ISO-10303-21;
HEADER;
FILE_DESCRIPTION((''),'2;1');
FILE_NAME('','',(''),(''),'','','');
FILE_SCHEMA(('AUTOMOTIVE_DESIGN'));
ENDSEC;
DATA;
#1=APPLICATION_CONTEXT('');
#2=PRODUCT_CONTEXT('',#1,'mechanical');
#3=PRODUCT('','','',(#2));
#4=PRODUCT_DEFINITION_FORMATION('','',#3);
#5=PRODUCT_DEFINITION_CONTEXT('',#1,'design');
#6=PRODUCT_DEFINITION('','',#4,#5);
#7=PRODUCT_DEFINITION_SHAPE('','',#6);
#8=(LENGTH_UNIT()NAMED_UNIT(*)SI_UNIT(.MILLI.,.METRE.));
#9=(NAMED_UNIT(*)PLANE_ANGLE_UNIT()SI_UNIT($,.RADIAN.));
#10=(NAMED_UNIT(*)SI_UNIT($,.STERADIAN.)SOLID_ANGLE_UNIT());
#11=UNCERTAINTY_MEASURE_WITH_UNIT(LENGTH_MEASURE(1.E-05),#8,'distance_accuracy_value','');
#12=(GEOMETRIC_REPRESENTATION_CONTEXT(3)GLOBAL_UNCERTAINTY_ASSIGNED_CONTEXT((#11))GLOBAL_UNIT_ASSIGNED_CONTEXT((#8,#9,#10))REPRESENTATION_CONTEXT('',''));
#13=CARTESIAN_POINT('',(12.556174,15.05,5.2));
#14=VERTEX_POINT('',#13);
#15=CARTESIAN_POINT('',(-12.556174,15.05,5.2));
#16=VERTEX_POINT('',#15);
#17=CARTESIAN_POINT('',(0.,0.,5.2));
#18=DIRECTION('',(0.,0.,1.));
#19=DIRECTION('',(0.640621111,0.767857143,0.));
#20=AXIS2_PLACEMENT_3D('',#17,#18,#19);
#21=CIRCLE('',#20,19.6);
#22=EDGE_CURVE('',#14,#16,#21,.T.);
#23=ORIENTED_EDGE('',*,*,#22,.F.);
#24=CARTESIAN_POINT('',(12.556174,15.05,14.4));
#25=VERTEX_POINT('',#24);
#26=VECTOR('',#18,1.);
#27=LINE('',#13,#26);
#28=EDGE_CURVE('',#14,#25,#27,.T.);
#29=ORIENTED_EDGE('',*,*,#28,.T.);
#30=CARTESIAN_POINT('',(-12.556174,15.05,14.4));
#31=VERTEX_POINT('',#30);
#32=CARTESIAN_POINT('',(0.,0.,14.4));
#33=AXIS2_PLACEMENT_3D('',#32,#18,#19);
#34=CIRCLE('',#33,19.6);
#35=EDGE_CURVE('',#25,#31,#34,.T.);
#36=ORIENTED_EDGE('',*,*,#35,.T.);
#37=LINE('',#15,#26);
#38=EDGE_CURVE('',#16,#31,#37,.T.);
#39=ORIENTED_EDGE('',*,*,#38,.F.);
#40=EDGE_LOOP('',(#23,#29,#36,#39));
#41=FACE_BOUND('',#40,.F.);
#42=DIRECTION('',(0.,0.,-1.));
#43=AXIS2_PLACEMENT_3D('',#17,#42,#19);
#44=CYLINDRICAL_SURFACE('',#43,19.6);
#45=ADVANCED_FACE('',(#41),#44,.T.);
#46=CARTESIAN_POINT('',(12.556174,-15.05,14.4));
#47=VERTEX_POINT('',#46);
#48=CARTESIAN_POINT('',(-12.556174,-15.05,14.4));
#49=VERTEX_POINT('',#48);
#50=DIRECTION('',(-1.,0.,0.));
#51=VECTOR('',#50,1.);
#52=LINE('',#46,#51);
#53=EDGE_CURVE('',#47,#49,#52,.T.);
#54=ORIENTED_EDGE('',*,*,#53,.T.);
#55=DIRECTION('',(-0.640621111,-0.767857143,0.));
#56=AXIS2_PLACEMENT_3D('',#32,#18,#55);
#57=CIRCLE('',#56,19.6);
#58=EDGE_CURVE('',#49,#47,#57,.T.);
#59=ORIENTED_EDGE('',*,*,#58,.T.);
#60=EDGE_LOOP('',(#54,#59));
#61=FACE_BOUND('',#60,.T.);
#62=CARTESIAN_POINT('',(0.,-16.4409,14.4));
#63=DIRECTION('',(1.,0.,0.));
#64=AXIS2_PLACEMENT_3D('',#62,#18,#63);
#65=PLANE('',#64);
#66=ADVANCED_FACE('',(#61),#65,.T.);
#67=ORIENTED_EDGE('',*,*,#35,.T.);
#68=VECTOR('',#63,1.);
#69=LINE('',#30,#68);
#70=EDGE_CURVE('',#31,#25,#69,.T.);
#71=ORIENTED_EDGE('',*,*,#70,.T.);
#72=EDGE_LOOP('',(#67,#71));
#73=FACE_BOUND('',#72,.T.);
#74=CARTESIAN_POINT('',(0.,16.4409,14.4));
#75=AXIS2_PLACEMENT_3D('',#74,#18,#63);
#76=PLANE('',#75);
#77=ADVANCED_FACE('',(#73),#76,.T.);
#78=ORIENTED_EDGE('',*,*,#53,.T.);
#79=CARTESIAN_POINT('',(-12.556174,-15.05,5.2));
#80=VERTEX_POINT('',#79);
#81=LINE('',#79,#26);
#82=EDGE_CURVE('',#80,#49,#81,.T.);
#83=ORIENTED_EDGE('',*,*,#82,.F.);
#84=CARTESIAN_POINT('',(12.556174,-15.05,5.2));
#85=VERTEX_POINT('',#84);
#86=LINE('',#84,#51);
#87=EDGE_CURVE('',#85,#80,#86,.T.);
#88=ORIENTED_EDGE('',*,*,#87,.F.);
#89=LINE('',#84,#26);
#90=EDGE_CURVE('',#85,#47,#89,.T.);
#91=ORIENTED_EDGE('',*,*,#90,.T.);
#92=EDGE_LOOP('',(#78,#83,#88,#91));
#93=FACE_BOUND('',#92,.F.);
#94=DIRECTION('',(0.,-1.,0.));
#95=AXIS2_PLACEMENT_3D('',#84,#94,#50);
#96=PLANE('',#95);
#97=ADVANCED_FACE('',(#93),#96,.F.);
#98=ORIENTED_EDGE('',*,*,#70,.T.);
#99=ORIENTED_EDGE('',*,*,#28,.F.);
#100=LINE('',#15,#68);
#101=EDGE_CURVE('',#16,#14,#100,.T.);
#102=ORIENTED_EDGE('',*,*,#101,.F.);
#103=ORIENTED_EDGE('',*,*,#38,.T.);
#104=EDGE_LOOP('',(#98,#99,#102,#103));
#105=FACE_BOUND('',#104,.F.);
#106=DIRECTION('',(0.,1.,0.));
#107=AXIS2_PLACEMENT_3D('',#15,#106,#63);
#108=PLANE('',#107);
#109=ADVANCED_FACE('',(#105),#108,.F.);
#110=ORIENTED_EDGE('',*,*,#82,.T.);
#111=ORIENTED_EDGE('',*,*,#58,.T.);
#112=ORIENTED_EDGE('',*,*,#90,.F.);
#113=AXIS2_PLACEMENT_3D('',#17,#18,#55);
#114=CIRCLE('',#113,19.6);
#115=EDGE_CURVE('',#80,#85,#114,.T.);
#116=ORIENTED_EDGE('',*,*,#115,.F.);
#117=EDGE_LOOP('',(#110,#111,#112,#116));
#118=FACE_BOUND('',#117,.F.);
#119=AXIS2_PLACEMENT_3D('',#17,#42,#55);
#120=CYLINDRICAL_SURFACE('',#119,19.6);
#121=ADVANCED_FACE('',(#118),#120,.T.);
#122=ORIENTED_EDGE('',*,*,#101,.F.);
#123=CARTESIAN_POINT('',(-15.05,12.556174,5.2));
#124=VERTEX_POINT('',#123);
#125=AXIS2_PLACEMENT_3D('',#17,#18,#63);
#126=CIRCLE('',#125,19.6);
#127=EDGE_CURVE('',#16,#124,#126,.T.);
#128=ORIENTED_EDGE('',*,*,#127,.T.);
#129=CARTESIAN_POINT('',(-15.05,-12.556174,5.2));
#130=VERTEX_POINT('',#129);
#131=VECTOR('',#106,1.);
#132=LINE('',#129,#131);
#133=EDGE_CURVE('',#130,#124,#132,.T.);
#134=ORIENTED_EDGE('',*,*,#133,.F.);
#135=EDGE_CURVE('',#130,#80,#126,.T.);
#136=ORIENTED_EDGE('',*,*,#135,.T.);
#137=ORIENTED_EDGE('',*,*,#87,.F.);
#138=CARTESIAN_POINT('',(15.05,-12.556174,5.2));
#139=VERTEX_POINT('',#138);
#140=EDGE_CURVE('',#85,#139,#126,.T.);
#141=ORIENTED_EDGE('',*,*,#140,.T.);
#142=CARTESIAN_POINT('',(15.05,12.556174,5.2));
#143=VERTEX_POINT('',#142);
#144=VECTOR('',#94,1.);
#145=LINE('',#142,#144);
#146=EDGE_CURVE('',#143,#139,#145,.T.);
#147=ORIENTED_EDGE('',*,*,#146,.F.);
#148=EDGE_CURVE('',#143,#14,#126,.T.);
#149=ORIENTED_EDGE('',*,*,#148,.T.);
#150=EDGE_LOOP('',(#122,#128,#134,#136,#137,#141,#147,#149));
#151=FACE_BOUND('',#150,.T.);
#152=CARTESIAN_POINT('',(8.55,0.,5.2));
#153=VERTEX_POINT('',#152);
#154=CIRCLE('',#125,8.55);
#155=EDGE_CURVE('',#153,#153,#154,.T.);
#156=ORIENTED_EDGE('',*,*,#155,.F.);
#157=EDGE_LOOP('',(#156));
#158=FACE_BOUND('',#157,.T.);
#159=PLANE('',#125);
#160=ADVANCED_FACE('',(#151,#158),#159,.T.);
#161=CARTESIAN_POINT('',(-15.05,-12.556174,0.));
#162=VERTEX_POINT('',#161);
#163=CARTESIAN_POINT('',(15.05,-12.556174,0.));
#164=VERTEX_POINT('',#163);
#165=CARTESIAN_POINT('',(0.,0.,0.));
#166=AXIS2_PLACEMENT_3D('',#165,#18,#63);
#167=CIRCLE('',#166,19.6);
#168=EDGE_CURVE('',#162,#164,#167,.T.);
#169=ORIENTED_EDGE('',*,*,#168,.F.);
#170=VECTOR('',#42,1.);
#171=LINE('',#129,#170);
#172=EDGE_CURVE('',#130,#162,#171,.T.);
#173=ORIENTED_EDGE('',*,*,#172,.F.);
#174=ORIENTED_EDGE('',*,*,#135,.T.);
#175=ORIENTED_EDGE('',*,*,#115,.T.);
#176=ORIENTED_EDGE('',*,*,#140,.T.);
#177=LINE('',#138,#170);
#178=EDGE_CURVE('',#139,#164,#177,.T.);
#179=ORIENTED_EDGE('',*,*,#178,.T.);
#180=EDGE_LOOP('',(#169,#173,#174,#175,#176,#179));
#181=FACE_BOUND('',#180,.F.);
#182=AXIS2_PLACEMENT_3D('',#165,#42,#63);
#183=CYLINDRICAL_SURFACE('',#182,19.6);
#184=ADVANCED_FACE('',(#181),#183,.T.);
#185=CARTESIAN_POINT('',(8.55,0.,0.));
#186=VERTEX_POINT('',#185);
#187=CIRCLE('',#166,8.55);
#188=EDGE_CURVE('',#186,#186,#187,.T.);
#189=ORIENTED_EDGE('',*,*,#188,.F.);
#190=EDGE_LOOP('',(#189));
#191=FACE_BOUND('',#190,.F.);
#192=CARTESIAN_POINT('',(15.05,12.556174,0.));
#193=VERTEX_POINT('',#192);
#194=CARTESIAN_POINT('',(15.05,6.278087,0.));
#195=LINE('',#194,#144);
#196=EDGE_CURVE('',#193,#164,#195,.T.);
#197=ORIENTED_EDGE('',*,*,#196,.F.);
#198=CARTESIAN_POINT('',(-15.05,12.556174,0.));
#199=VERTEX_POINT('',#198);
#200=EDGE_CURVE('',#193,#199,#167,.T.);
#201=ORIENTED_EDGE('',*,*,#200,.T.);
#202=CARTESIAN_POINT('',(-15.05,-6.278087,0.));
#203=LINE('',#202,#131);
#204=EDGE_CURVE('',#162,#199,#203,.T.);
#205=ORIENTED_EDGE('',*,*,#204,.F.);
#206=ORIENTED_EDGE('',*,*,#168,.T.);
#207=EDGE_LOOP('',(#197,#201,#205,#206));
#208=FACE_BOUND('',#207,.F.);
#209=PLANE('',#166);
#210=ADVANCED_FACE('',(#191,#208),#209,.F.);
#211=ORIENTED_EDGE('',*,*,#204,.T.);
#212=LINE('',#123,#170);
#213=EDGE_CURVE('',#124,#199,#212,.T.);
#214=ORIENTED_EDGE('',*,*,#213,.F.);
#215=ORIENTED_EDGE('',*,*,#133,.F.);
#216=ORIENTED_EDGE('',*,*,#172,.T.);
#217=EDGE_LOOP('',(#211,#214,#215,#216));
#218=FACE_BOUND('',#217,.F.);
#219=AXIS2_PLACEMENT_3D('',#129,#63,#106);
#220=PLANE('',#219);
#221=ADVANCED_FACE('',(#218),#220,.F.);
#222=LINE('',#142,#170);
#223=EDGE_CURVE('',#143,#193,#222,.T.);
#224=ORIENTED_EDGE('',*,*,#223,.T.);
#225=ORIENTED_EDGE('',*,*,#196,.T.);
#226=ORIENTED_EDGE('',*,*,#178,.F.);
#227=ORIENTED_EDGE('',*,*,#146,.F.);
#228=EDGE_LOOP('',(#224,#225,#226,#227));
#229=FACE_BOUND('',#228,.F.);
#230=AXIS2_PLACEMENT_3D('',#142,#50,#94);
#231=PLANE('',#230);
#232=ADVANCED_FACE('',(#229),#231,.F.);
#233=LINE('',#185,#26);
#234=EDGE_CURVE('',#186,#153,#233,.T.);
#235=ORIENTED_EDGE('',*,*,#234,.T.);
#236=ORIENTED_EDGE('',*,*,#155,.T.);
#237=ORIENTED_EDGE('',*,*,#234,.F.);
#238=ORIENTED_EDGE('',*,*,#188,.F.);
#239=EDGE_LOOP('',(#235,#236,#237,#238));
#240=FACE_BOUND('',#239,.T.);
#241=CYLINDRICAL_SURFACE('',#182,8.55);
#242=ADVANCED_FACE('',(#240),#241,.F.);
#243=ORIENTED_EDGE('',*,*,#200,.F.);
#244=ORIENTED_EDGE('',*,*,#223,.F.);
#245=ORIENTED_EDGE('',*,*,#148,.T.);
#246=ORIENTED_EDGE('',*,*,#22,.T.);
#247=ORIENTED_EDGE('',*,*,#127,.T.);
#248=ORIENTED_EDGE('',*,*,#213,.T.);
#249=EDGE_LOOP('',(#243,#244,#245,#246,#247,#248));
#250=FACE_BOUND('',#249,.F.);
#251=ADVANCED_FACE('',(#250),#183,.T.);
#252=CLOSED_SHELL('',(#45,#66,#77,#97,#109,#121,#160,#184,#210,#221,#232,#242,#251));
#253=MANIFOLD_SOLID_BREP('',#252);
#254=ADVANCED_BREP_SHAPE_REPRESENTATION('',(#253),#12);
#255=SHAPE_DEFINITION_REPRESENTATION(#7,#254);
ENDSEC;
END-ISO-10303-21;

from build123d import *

# Parameters (mm, degrees)
F0_R     = 19.6
F0_R_2   = 8.55
F1_DEPTH = 5.2
F3_DEPTH = 9.2
F4_DEPTH = 5.201


with BuildPart() as f1:
    # F0 (on Top) → F1 (new body)
    with BuildSketch(Plane.XY):
        Circle(F0_R)
        Circle(F0_R_2, mode=Mode.SUBTRACT)
    extrude(amount=F1_DEPTH)

    # F2 (on face) → F3 (join)
    with BuildSketch(Plane.XY.offset(5.2)):
        with BuildLine():
            ThreePointArc((-12.5561737803, -15.05), (0, -19.6), (12.5561737803, -15.05))
            Line((12.5561737803, -15.05), (-12.5561737803, -15.05))
        make_face()
        with BuildLine():
            Line((-12.5561737803, 15.05), (12.5561737803, 15.05))
            ThreePointArc((12.5561737803, 15.05), (0, 19.6), (-12.5561737803, 15.05))
        make_face()
    extrude(amount=F3_DEPTH)

    # F2 (on face) → F4 (cut, through all)
    with BuildSketch(Plane.XY.offset(5.2)):
        with BuildLine():
            ThreePointArc((-15.05, 12.5561737803), (-19.6, 0), (-15.05, -12.5561737803))
            Line((-15.05, -12.5561737803), (-15.05, 12.5561737803))
        make_face()
        with BuildLine():
            Line((15.05, 12.5561737803), (15.05, -12.5561737803))
            ThreePointArc((15.05, -12.5561737803), (18.4274252135, -6.6775744099), (19.6, 0))
            ThreePointArc((19.6, 0), (18.4274252135, 6.6775744099), (15.05, 12.5561737803))
        make_face()
    extrude(amount=-F4_DEPTH, mode=Mode.SUBTRACT)


solid = f1.part
